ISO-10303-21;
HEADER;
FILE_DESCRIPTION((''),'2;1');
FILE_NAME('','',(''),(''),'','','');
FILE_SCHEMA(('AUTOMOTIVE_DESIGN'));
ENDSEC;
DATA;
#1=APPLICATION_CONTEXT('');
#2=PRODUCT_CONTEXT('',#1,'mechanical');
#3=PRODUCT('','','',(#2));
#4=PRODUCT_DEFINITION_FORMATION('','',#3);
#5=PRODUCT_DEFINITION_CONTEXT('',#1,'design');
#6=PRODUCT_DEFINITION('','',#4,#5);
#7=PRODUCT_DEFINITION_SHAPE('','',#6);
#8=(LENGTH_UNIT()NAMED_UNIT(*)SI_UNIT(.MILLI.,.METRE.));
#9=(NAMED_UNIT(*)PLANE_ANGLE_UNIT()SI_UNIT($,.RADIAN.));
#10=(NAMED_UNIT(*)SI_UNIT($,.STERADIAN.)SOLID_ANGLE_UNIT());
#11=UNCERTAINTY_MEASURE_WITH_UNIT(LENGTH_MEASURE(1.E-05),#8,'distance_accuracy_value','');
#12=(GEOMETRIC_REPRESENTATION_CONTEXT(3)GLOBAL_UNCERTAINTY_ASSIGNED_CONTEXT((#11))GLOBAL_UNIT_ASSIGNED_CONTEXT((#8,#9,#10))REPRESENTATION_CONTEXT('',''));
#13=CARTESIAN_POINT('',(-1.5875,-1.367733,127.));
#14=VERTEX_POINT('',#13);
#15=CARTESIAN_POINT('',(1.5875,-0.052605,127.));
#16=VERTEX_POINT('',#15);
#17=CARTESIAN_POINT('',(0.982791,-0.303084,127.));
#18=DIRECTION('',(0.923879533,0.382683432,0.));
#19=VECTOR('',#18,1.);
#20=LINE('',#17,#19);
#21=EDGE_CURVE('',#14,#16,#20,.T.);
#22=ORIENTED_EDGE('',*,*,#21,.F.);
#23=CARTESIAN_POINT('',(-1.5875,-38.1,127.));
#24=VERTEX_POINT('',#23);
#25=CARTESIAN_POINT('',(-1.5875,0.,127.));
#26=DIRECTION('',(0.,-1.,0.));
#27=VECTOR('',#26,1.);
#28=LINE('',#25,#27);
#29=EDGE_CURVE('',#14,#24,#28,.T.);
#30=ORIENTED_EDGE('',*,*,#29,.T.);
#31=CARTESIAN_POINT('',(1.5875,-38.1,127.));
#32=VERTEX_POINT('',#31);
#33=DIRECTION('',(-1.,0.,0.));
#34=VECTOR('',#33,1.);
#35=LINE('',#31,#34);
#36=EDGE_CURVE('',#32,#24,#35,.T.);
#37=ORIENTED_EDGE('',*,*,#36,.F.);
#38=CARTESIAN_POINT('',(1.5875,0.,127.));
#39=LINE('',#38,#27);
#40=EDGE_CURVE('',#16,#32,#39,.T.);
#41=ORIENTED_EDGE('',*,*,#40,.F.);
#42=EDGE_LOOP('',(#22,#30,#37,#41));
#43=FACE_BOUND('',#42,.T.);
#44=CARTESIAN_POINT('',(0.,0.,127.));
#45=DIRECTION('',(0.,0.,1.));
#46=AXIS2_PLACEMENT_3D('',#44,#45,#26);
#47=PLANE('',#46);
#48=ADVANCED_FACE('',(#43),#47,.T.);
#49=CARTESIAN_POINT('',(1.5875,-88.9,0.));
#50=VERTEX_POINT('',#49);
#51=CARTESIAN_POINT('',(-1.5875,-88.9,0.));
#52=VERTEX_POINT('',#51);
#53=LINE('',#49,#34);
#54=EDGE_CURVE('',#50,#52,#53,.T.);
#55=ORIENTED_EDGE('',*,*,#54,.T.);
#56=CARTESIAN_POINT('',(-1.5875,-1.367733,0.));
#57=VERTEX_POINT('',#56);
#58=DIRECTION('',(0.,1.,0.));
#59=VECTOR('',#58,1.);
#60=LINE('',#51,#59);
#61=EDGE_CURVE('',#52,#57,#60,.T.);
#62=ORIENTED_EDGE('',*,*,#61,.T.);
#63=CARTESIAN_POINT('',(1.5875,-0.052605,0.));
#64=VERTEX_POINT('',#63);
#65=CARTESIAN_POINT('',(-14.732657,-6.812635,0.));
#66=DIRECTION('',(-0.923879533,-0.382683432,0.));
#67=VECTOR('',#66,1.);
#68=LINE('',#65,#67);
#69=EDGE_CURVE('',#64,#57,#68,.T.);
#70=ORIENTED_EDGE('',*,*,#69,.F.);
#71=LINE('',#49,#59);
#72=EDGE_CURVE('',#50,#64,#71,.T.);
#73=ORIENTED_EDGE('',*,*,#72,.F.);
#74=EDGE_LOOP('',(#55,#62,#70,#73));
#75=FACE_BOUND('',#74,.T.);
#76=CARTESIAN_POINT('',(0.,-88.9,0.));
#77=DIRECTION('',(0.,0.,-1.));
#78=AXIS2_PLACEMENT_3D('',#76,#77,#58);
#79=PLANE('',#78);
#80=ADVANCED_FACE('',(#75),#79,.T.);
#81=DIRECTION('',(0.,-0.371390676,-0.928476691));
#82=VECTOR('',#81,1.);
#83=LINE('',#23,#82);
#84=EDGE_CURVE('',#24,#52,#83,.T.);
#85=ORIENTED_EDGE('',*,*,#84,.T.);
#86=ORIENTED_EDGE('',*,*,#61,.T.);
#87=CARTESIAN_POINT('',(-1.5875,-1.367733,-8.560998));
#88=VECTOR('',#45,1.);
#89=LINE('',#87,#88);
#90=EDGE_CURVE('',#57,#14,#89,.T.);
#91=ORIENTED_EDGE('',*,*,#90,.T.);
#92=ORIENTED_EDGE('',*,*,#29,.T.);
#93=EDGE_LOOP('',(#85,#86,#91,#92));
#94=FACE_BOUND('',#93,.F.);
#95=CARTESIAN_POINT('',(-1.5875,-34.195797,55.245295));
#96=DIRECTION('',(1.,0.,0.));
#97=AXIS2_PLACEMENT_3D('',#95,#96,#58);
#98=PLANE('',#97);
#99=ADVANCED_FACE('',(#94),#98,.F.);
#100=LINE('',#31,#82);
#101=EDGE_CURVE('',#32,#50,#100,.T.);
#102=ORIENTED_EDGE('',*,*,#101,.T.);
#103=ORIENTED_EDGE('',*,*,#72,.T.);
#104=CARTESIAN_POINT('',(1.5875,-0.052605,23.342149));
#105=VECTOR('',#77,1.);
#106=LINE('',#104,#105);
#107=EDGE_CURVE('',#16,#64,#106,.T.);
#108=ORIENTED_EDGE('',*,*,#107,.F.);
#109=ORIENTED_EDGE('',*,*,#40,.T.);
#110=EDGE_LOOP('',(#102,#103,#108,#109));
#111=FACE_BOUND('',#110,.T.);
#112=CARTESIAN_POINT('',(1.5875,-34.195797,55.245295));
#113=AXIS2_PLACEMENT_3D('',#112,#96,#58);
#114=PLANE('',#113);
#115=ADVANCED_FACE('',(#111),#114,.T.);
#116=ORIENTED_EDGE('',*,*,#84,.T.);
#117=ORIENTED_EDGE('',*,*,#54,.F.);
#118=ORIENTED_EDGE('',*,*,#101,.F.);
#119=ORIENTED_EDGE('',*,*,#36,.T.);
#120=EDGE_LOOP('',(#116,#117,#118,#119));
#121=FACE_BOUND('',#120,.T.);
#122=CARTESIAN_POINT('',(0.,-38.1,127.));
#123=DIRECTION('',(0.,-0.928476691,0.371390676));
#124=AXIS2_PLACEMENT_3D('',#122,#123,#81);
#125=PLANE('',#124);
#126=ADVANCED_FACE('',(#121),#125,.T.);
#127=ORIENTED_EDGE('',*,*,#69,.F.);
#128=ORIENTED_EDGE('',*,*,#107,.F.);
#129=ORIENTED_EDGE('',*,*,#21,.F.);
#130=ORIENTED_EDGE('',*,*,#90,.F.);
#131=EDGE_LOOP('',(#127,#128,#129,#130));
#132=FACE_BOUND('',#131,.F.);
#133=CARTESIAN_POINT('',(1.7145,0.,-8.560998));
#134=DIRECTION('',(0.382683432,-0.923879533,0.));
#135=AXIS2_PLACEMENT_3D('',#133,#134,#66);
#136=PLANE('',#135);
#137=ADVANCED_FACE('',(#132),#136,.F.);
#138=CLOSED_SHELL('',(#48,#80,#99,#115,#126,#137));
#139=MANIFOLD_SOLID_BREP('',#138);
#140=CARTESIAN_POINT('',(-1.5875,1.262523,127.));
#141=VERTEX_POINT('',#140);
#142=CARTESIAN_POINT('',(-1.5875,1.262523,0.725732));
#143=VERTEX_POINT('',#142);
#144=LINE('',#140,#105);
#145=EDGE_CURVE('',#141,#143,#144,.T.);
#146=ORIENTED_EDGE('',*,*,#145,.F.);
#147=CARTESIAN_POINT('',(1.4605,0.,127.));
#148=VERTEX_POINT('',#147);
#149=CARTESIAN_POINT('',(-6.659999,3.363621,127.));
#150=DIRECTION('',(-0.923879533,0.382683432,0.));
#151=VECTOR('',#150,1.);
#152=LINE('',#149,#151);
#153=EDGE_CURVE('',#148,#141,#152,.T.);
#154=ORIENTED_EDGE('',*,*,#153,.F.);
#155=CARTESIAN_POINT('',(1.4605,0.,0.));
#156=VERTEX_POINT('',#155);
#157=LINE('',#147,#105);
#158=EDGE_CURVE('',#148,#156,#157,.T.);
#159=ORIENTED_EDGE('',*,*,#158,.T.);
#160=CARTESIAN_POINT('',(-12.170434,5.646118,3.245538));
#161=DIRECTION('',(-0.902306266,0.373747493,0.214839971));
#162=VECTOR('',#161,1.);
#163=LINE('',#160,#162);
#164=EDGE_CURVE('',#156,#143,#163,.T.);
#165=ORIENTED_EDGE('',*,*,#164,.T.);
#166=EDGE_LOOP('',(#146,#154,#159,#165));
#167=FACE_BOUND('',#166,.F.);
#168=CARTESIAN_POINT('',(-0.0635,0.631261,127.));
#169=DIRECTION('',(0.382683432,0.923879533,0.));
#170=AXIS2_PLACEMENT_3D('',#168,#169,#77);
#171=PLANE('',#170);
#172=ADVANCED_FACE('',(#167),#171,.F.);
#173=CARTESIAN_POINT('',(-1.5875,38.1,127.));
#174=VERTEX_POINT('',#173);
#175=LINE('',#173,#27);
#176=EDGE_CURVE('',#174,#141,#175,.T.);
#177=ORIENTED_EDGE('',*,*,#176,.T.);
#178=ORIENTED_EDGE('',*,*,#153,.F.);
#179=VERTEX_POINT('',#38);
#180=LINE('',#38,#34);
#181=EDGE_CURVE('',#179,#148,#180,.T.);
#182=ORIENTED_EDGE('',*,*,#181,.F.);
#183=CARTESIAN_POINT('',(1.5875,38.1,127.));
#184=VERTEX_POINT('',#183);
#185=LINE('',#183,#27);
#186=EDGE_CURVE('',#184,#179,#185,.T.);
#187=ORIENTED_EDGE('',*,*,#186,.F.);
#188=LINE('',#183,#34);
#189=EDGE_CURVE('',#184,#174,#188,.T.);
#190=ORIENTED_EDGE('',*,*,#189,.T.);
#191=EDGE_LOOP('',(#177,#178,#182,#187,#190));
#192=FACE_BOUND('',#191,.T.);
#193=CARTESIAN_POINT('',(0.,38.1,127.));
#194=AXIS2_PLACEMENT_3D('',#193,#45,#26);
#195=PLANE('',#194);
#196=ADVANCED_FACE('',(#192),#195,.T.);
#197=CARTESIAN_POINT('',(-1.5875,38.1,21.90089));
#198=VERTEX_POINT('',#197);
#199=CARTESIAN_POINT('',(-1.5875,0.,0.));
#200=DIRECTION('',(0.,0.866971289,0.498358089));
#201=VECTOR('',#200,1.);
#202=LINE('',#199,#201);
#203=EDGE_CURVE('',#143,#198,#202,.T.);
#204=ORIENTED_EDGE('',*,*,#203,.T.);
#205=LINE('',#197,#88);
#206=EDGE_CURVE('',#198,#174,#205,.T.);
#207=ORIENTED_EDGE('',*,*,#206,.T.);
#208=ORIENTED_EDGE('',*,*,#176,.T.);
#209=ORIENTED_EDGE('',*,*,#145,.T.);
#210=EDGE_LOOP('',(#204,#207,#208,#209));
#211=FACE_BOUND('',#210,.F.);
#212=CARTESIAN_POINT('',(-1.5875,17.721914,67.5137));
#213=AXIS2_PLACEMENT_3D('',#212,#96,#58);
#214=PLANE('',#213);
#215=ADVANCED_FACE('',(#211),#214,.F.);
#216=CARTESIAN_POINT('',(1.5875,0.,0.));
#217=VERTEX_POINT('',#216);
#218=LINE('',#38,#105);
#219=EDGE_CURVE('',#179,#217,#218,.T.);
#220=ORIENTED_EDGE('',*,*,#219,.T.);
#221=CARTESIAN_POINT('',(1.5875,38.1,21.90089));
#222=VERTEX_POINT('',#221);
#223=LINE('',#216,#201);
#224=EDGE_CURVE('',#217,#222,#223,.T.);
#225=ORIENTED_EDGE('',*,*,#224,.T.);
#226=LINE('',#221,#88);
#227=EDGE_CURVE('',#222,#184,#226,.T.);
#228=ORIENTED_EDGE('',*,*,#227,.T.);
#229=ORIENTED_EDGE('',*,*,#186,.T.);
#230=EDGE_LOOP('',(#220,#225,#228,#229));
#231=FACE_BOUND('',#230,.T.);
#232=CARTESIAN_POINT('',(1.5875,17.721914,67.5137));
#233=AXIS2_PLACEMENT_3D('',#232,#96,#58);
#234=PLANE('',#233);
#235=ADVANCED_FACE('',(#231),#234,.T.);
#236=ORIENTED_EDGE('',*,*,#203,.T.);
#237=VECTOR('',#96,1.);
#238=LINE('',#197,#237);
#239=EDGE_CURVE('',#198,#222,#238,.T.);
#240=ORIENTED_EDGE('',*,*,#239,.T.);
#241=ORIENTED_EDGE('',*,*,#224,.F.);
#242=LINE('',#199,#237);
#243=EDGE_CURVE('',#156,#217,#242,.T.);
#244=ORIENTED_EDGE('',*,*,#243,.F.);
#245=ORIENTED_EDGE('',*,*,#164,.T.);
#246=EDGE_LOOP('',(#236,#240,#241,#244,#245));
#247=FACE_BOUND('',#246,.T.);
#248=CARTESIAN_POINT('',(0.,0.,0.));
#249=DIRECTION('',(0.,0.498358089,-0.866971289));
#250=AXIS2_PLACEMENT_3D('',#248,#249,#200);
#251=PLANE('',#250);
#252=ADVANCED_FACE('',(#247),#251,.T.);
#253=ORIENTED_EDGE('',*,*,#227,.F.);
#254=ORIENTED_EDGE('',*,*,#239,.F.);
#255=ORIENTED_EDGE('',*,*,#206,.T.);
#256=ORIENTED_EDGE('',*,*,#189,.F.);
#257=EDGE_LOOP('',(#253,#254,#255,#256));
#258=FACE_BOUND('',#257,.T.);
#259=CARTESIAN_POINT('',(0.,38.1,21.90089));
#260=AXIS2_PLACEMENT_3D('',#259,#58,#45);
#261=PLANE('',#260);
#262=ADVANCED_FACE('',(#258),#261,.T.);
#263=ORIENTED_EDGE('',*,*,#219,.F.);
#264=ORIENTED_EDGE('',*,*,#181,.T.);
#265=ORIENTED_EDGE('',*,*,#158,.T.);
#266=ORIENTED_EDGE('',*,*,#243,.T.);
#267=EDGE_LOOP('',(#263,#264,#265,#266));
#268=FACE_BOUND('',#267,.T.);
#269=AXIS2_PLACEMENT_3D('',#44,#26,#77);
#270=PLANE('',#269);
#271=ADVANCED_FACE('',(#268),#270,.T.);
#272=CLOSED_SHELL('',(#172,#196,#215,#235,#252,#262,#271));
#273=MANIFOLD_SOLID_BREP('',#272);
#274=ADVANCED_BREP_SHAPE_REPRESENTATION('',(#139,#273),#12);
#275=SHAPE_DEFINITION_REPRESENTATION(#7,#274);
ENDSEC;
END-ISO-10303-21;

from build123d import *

# Parameters (mm, degrees)
F1_DEPTH    = 1.5875
F2_DEPTH    = 1.5875
F3_T1_DEPTH = 144.1219952748
F4_SIZE2    = 1.2625229381
F4_SIZE     = 3.048


# Not quite as in the source:
# - a fillet or chamfer that OpenCascade refuses, or shapes differently, is made with other operations: its cross-section is extruded or revolved along the edge and cut away or added


with BuildPart() as f1:
    # F0 (on Right) → F1 (new body, symmetric)
    with BuildSketch(Plane.YZ):
        Polygon((-88.9, 0), (0, 0), (0, 127), (-38.1, 127), align=None)
    extrude(amount=F1_DEPTH, both=True)

    # F3: chamfer of 3.302 x 1.367733183 on 1 edges, made by hand

    # F3_s2 → F3_t1 (cut)
    with BuildSketch(Plane.XY.offset(-8.5609976374)):
        Polygon((1.7145, 0), (-1.5875, -1.367733183), (-1.5875, 0), align=None)
    extrude(amount=F3_T1_DEPTH, mode=Mode.SUBTRACT)


with BuildPart() as f2:
    # F0 (on Right) → F2 (new body, symmetric)
    with BuildSketch(Plane.YZ):
        Polygon((0, 127), (0, 0), (38.1, 21.900890395), (38.1, 127), align=None)
    extrude(amount=F2_DEPTH, both=True)

    # F4
    f4_edges = [f2.edges().sort_by_distance(p)[0] for p in [
        (-1.5875, 0, 63.5),
    ]]
    f4_side = f2.faces().sort_by_distance((0, 0, 63.5))[0]
    chamfer(f4_edges, length=F4_SIZE, length2=F4_SIZE2, reference=f4_side)


solid = Compound([f1.part, f2.part])
